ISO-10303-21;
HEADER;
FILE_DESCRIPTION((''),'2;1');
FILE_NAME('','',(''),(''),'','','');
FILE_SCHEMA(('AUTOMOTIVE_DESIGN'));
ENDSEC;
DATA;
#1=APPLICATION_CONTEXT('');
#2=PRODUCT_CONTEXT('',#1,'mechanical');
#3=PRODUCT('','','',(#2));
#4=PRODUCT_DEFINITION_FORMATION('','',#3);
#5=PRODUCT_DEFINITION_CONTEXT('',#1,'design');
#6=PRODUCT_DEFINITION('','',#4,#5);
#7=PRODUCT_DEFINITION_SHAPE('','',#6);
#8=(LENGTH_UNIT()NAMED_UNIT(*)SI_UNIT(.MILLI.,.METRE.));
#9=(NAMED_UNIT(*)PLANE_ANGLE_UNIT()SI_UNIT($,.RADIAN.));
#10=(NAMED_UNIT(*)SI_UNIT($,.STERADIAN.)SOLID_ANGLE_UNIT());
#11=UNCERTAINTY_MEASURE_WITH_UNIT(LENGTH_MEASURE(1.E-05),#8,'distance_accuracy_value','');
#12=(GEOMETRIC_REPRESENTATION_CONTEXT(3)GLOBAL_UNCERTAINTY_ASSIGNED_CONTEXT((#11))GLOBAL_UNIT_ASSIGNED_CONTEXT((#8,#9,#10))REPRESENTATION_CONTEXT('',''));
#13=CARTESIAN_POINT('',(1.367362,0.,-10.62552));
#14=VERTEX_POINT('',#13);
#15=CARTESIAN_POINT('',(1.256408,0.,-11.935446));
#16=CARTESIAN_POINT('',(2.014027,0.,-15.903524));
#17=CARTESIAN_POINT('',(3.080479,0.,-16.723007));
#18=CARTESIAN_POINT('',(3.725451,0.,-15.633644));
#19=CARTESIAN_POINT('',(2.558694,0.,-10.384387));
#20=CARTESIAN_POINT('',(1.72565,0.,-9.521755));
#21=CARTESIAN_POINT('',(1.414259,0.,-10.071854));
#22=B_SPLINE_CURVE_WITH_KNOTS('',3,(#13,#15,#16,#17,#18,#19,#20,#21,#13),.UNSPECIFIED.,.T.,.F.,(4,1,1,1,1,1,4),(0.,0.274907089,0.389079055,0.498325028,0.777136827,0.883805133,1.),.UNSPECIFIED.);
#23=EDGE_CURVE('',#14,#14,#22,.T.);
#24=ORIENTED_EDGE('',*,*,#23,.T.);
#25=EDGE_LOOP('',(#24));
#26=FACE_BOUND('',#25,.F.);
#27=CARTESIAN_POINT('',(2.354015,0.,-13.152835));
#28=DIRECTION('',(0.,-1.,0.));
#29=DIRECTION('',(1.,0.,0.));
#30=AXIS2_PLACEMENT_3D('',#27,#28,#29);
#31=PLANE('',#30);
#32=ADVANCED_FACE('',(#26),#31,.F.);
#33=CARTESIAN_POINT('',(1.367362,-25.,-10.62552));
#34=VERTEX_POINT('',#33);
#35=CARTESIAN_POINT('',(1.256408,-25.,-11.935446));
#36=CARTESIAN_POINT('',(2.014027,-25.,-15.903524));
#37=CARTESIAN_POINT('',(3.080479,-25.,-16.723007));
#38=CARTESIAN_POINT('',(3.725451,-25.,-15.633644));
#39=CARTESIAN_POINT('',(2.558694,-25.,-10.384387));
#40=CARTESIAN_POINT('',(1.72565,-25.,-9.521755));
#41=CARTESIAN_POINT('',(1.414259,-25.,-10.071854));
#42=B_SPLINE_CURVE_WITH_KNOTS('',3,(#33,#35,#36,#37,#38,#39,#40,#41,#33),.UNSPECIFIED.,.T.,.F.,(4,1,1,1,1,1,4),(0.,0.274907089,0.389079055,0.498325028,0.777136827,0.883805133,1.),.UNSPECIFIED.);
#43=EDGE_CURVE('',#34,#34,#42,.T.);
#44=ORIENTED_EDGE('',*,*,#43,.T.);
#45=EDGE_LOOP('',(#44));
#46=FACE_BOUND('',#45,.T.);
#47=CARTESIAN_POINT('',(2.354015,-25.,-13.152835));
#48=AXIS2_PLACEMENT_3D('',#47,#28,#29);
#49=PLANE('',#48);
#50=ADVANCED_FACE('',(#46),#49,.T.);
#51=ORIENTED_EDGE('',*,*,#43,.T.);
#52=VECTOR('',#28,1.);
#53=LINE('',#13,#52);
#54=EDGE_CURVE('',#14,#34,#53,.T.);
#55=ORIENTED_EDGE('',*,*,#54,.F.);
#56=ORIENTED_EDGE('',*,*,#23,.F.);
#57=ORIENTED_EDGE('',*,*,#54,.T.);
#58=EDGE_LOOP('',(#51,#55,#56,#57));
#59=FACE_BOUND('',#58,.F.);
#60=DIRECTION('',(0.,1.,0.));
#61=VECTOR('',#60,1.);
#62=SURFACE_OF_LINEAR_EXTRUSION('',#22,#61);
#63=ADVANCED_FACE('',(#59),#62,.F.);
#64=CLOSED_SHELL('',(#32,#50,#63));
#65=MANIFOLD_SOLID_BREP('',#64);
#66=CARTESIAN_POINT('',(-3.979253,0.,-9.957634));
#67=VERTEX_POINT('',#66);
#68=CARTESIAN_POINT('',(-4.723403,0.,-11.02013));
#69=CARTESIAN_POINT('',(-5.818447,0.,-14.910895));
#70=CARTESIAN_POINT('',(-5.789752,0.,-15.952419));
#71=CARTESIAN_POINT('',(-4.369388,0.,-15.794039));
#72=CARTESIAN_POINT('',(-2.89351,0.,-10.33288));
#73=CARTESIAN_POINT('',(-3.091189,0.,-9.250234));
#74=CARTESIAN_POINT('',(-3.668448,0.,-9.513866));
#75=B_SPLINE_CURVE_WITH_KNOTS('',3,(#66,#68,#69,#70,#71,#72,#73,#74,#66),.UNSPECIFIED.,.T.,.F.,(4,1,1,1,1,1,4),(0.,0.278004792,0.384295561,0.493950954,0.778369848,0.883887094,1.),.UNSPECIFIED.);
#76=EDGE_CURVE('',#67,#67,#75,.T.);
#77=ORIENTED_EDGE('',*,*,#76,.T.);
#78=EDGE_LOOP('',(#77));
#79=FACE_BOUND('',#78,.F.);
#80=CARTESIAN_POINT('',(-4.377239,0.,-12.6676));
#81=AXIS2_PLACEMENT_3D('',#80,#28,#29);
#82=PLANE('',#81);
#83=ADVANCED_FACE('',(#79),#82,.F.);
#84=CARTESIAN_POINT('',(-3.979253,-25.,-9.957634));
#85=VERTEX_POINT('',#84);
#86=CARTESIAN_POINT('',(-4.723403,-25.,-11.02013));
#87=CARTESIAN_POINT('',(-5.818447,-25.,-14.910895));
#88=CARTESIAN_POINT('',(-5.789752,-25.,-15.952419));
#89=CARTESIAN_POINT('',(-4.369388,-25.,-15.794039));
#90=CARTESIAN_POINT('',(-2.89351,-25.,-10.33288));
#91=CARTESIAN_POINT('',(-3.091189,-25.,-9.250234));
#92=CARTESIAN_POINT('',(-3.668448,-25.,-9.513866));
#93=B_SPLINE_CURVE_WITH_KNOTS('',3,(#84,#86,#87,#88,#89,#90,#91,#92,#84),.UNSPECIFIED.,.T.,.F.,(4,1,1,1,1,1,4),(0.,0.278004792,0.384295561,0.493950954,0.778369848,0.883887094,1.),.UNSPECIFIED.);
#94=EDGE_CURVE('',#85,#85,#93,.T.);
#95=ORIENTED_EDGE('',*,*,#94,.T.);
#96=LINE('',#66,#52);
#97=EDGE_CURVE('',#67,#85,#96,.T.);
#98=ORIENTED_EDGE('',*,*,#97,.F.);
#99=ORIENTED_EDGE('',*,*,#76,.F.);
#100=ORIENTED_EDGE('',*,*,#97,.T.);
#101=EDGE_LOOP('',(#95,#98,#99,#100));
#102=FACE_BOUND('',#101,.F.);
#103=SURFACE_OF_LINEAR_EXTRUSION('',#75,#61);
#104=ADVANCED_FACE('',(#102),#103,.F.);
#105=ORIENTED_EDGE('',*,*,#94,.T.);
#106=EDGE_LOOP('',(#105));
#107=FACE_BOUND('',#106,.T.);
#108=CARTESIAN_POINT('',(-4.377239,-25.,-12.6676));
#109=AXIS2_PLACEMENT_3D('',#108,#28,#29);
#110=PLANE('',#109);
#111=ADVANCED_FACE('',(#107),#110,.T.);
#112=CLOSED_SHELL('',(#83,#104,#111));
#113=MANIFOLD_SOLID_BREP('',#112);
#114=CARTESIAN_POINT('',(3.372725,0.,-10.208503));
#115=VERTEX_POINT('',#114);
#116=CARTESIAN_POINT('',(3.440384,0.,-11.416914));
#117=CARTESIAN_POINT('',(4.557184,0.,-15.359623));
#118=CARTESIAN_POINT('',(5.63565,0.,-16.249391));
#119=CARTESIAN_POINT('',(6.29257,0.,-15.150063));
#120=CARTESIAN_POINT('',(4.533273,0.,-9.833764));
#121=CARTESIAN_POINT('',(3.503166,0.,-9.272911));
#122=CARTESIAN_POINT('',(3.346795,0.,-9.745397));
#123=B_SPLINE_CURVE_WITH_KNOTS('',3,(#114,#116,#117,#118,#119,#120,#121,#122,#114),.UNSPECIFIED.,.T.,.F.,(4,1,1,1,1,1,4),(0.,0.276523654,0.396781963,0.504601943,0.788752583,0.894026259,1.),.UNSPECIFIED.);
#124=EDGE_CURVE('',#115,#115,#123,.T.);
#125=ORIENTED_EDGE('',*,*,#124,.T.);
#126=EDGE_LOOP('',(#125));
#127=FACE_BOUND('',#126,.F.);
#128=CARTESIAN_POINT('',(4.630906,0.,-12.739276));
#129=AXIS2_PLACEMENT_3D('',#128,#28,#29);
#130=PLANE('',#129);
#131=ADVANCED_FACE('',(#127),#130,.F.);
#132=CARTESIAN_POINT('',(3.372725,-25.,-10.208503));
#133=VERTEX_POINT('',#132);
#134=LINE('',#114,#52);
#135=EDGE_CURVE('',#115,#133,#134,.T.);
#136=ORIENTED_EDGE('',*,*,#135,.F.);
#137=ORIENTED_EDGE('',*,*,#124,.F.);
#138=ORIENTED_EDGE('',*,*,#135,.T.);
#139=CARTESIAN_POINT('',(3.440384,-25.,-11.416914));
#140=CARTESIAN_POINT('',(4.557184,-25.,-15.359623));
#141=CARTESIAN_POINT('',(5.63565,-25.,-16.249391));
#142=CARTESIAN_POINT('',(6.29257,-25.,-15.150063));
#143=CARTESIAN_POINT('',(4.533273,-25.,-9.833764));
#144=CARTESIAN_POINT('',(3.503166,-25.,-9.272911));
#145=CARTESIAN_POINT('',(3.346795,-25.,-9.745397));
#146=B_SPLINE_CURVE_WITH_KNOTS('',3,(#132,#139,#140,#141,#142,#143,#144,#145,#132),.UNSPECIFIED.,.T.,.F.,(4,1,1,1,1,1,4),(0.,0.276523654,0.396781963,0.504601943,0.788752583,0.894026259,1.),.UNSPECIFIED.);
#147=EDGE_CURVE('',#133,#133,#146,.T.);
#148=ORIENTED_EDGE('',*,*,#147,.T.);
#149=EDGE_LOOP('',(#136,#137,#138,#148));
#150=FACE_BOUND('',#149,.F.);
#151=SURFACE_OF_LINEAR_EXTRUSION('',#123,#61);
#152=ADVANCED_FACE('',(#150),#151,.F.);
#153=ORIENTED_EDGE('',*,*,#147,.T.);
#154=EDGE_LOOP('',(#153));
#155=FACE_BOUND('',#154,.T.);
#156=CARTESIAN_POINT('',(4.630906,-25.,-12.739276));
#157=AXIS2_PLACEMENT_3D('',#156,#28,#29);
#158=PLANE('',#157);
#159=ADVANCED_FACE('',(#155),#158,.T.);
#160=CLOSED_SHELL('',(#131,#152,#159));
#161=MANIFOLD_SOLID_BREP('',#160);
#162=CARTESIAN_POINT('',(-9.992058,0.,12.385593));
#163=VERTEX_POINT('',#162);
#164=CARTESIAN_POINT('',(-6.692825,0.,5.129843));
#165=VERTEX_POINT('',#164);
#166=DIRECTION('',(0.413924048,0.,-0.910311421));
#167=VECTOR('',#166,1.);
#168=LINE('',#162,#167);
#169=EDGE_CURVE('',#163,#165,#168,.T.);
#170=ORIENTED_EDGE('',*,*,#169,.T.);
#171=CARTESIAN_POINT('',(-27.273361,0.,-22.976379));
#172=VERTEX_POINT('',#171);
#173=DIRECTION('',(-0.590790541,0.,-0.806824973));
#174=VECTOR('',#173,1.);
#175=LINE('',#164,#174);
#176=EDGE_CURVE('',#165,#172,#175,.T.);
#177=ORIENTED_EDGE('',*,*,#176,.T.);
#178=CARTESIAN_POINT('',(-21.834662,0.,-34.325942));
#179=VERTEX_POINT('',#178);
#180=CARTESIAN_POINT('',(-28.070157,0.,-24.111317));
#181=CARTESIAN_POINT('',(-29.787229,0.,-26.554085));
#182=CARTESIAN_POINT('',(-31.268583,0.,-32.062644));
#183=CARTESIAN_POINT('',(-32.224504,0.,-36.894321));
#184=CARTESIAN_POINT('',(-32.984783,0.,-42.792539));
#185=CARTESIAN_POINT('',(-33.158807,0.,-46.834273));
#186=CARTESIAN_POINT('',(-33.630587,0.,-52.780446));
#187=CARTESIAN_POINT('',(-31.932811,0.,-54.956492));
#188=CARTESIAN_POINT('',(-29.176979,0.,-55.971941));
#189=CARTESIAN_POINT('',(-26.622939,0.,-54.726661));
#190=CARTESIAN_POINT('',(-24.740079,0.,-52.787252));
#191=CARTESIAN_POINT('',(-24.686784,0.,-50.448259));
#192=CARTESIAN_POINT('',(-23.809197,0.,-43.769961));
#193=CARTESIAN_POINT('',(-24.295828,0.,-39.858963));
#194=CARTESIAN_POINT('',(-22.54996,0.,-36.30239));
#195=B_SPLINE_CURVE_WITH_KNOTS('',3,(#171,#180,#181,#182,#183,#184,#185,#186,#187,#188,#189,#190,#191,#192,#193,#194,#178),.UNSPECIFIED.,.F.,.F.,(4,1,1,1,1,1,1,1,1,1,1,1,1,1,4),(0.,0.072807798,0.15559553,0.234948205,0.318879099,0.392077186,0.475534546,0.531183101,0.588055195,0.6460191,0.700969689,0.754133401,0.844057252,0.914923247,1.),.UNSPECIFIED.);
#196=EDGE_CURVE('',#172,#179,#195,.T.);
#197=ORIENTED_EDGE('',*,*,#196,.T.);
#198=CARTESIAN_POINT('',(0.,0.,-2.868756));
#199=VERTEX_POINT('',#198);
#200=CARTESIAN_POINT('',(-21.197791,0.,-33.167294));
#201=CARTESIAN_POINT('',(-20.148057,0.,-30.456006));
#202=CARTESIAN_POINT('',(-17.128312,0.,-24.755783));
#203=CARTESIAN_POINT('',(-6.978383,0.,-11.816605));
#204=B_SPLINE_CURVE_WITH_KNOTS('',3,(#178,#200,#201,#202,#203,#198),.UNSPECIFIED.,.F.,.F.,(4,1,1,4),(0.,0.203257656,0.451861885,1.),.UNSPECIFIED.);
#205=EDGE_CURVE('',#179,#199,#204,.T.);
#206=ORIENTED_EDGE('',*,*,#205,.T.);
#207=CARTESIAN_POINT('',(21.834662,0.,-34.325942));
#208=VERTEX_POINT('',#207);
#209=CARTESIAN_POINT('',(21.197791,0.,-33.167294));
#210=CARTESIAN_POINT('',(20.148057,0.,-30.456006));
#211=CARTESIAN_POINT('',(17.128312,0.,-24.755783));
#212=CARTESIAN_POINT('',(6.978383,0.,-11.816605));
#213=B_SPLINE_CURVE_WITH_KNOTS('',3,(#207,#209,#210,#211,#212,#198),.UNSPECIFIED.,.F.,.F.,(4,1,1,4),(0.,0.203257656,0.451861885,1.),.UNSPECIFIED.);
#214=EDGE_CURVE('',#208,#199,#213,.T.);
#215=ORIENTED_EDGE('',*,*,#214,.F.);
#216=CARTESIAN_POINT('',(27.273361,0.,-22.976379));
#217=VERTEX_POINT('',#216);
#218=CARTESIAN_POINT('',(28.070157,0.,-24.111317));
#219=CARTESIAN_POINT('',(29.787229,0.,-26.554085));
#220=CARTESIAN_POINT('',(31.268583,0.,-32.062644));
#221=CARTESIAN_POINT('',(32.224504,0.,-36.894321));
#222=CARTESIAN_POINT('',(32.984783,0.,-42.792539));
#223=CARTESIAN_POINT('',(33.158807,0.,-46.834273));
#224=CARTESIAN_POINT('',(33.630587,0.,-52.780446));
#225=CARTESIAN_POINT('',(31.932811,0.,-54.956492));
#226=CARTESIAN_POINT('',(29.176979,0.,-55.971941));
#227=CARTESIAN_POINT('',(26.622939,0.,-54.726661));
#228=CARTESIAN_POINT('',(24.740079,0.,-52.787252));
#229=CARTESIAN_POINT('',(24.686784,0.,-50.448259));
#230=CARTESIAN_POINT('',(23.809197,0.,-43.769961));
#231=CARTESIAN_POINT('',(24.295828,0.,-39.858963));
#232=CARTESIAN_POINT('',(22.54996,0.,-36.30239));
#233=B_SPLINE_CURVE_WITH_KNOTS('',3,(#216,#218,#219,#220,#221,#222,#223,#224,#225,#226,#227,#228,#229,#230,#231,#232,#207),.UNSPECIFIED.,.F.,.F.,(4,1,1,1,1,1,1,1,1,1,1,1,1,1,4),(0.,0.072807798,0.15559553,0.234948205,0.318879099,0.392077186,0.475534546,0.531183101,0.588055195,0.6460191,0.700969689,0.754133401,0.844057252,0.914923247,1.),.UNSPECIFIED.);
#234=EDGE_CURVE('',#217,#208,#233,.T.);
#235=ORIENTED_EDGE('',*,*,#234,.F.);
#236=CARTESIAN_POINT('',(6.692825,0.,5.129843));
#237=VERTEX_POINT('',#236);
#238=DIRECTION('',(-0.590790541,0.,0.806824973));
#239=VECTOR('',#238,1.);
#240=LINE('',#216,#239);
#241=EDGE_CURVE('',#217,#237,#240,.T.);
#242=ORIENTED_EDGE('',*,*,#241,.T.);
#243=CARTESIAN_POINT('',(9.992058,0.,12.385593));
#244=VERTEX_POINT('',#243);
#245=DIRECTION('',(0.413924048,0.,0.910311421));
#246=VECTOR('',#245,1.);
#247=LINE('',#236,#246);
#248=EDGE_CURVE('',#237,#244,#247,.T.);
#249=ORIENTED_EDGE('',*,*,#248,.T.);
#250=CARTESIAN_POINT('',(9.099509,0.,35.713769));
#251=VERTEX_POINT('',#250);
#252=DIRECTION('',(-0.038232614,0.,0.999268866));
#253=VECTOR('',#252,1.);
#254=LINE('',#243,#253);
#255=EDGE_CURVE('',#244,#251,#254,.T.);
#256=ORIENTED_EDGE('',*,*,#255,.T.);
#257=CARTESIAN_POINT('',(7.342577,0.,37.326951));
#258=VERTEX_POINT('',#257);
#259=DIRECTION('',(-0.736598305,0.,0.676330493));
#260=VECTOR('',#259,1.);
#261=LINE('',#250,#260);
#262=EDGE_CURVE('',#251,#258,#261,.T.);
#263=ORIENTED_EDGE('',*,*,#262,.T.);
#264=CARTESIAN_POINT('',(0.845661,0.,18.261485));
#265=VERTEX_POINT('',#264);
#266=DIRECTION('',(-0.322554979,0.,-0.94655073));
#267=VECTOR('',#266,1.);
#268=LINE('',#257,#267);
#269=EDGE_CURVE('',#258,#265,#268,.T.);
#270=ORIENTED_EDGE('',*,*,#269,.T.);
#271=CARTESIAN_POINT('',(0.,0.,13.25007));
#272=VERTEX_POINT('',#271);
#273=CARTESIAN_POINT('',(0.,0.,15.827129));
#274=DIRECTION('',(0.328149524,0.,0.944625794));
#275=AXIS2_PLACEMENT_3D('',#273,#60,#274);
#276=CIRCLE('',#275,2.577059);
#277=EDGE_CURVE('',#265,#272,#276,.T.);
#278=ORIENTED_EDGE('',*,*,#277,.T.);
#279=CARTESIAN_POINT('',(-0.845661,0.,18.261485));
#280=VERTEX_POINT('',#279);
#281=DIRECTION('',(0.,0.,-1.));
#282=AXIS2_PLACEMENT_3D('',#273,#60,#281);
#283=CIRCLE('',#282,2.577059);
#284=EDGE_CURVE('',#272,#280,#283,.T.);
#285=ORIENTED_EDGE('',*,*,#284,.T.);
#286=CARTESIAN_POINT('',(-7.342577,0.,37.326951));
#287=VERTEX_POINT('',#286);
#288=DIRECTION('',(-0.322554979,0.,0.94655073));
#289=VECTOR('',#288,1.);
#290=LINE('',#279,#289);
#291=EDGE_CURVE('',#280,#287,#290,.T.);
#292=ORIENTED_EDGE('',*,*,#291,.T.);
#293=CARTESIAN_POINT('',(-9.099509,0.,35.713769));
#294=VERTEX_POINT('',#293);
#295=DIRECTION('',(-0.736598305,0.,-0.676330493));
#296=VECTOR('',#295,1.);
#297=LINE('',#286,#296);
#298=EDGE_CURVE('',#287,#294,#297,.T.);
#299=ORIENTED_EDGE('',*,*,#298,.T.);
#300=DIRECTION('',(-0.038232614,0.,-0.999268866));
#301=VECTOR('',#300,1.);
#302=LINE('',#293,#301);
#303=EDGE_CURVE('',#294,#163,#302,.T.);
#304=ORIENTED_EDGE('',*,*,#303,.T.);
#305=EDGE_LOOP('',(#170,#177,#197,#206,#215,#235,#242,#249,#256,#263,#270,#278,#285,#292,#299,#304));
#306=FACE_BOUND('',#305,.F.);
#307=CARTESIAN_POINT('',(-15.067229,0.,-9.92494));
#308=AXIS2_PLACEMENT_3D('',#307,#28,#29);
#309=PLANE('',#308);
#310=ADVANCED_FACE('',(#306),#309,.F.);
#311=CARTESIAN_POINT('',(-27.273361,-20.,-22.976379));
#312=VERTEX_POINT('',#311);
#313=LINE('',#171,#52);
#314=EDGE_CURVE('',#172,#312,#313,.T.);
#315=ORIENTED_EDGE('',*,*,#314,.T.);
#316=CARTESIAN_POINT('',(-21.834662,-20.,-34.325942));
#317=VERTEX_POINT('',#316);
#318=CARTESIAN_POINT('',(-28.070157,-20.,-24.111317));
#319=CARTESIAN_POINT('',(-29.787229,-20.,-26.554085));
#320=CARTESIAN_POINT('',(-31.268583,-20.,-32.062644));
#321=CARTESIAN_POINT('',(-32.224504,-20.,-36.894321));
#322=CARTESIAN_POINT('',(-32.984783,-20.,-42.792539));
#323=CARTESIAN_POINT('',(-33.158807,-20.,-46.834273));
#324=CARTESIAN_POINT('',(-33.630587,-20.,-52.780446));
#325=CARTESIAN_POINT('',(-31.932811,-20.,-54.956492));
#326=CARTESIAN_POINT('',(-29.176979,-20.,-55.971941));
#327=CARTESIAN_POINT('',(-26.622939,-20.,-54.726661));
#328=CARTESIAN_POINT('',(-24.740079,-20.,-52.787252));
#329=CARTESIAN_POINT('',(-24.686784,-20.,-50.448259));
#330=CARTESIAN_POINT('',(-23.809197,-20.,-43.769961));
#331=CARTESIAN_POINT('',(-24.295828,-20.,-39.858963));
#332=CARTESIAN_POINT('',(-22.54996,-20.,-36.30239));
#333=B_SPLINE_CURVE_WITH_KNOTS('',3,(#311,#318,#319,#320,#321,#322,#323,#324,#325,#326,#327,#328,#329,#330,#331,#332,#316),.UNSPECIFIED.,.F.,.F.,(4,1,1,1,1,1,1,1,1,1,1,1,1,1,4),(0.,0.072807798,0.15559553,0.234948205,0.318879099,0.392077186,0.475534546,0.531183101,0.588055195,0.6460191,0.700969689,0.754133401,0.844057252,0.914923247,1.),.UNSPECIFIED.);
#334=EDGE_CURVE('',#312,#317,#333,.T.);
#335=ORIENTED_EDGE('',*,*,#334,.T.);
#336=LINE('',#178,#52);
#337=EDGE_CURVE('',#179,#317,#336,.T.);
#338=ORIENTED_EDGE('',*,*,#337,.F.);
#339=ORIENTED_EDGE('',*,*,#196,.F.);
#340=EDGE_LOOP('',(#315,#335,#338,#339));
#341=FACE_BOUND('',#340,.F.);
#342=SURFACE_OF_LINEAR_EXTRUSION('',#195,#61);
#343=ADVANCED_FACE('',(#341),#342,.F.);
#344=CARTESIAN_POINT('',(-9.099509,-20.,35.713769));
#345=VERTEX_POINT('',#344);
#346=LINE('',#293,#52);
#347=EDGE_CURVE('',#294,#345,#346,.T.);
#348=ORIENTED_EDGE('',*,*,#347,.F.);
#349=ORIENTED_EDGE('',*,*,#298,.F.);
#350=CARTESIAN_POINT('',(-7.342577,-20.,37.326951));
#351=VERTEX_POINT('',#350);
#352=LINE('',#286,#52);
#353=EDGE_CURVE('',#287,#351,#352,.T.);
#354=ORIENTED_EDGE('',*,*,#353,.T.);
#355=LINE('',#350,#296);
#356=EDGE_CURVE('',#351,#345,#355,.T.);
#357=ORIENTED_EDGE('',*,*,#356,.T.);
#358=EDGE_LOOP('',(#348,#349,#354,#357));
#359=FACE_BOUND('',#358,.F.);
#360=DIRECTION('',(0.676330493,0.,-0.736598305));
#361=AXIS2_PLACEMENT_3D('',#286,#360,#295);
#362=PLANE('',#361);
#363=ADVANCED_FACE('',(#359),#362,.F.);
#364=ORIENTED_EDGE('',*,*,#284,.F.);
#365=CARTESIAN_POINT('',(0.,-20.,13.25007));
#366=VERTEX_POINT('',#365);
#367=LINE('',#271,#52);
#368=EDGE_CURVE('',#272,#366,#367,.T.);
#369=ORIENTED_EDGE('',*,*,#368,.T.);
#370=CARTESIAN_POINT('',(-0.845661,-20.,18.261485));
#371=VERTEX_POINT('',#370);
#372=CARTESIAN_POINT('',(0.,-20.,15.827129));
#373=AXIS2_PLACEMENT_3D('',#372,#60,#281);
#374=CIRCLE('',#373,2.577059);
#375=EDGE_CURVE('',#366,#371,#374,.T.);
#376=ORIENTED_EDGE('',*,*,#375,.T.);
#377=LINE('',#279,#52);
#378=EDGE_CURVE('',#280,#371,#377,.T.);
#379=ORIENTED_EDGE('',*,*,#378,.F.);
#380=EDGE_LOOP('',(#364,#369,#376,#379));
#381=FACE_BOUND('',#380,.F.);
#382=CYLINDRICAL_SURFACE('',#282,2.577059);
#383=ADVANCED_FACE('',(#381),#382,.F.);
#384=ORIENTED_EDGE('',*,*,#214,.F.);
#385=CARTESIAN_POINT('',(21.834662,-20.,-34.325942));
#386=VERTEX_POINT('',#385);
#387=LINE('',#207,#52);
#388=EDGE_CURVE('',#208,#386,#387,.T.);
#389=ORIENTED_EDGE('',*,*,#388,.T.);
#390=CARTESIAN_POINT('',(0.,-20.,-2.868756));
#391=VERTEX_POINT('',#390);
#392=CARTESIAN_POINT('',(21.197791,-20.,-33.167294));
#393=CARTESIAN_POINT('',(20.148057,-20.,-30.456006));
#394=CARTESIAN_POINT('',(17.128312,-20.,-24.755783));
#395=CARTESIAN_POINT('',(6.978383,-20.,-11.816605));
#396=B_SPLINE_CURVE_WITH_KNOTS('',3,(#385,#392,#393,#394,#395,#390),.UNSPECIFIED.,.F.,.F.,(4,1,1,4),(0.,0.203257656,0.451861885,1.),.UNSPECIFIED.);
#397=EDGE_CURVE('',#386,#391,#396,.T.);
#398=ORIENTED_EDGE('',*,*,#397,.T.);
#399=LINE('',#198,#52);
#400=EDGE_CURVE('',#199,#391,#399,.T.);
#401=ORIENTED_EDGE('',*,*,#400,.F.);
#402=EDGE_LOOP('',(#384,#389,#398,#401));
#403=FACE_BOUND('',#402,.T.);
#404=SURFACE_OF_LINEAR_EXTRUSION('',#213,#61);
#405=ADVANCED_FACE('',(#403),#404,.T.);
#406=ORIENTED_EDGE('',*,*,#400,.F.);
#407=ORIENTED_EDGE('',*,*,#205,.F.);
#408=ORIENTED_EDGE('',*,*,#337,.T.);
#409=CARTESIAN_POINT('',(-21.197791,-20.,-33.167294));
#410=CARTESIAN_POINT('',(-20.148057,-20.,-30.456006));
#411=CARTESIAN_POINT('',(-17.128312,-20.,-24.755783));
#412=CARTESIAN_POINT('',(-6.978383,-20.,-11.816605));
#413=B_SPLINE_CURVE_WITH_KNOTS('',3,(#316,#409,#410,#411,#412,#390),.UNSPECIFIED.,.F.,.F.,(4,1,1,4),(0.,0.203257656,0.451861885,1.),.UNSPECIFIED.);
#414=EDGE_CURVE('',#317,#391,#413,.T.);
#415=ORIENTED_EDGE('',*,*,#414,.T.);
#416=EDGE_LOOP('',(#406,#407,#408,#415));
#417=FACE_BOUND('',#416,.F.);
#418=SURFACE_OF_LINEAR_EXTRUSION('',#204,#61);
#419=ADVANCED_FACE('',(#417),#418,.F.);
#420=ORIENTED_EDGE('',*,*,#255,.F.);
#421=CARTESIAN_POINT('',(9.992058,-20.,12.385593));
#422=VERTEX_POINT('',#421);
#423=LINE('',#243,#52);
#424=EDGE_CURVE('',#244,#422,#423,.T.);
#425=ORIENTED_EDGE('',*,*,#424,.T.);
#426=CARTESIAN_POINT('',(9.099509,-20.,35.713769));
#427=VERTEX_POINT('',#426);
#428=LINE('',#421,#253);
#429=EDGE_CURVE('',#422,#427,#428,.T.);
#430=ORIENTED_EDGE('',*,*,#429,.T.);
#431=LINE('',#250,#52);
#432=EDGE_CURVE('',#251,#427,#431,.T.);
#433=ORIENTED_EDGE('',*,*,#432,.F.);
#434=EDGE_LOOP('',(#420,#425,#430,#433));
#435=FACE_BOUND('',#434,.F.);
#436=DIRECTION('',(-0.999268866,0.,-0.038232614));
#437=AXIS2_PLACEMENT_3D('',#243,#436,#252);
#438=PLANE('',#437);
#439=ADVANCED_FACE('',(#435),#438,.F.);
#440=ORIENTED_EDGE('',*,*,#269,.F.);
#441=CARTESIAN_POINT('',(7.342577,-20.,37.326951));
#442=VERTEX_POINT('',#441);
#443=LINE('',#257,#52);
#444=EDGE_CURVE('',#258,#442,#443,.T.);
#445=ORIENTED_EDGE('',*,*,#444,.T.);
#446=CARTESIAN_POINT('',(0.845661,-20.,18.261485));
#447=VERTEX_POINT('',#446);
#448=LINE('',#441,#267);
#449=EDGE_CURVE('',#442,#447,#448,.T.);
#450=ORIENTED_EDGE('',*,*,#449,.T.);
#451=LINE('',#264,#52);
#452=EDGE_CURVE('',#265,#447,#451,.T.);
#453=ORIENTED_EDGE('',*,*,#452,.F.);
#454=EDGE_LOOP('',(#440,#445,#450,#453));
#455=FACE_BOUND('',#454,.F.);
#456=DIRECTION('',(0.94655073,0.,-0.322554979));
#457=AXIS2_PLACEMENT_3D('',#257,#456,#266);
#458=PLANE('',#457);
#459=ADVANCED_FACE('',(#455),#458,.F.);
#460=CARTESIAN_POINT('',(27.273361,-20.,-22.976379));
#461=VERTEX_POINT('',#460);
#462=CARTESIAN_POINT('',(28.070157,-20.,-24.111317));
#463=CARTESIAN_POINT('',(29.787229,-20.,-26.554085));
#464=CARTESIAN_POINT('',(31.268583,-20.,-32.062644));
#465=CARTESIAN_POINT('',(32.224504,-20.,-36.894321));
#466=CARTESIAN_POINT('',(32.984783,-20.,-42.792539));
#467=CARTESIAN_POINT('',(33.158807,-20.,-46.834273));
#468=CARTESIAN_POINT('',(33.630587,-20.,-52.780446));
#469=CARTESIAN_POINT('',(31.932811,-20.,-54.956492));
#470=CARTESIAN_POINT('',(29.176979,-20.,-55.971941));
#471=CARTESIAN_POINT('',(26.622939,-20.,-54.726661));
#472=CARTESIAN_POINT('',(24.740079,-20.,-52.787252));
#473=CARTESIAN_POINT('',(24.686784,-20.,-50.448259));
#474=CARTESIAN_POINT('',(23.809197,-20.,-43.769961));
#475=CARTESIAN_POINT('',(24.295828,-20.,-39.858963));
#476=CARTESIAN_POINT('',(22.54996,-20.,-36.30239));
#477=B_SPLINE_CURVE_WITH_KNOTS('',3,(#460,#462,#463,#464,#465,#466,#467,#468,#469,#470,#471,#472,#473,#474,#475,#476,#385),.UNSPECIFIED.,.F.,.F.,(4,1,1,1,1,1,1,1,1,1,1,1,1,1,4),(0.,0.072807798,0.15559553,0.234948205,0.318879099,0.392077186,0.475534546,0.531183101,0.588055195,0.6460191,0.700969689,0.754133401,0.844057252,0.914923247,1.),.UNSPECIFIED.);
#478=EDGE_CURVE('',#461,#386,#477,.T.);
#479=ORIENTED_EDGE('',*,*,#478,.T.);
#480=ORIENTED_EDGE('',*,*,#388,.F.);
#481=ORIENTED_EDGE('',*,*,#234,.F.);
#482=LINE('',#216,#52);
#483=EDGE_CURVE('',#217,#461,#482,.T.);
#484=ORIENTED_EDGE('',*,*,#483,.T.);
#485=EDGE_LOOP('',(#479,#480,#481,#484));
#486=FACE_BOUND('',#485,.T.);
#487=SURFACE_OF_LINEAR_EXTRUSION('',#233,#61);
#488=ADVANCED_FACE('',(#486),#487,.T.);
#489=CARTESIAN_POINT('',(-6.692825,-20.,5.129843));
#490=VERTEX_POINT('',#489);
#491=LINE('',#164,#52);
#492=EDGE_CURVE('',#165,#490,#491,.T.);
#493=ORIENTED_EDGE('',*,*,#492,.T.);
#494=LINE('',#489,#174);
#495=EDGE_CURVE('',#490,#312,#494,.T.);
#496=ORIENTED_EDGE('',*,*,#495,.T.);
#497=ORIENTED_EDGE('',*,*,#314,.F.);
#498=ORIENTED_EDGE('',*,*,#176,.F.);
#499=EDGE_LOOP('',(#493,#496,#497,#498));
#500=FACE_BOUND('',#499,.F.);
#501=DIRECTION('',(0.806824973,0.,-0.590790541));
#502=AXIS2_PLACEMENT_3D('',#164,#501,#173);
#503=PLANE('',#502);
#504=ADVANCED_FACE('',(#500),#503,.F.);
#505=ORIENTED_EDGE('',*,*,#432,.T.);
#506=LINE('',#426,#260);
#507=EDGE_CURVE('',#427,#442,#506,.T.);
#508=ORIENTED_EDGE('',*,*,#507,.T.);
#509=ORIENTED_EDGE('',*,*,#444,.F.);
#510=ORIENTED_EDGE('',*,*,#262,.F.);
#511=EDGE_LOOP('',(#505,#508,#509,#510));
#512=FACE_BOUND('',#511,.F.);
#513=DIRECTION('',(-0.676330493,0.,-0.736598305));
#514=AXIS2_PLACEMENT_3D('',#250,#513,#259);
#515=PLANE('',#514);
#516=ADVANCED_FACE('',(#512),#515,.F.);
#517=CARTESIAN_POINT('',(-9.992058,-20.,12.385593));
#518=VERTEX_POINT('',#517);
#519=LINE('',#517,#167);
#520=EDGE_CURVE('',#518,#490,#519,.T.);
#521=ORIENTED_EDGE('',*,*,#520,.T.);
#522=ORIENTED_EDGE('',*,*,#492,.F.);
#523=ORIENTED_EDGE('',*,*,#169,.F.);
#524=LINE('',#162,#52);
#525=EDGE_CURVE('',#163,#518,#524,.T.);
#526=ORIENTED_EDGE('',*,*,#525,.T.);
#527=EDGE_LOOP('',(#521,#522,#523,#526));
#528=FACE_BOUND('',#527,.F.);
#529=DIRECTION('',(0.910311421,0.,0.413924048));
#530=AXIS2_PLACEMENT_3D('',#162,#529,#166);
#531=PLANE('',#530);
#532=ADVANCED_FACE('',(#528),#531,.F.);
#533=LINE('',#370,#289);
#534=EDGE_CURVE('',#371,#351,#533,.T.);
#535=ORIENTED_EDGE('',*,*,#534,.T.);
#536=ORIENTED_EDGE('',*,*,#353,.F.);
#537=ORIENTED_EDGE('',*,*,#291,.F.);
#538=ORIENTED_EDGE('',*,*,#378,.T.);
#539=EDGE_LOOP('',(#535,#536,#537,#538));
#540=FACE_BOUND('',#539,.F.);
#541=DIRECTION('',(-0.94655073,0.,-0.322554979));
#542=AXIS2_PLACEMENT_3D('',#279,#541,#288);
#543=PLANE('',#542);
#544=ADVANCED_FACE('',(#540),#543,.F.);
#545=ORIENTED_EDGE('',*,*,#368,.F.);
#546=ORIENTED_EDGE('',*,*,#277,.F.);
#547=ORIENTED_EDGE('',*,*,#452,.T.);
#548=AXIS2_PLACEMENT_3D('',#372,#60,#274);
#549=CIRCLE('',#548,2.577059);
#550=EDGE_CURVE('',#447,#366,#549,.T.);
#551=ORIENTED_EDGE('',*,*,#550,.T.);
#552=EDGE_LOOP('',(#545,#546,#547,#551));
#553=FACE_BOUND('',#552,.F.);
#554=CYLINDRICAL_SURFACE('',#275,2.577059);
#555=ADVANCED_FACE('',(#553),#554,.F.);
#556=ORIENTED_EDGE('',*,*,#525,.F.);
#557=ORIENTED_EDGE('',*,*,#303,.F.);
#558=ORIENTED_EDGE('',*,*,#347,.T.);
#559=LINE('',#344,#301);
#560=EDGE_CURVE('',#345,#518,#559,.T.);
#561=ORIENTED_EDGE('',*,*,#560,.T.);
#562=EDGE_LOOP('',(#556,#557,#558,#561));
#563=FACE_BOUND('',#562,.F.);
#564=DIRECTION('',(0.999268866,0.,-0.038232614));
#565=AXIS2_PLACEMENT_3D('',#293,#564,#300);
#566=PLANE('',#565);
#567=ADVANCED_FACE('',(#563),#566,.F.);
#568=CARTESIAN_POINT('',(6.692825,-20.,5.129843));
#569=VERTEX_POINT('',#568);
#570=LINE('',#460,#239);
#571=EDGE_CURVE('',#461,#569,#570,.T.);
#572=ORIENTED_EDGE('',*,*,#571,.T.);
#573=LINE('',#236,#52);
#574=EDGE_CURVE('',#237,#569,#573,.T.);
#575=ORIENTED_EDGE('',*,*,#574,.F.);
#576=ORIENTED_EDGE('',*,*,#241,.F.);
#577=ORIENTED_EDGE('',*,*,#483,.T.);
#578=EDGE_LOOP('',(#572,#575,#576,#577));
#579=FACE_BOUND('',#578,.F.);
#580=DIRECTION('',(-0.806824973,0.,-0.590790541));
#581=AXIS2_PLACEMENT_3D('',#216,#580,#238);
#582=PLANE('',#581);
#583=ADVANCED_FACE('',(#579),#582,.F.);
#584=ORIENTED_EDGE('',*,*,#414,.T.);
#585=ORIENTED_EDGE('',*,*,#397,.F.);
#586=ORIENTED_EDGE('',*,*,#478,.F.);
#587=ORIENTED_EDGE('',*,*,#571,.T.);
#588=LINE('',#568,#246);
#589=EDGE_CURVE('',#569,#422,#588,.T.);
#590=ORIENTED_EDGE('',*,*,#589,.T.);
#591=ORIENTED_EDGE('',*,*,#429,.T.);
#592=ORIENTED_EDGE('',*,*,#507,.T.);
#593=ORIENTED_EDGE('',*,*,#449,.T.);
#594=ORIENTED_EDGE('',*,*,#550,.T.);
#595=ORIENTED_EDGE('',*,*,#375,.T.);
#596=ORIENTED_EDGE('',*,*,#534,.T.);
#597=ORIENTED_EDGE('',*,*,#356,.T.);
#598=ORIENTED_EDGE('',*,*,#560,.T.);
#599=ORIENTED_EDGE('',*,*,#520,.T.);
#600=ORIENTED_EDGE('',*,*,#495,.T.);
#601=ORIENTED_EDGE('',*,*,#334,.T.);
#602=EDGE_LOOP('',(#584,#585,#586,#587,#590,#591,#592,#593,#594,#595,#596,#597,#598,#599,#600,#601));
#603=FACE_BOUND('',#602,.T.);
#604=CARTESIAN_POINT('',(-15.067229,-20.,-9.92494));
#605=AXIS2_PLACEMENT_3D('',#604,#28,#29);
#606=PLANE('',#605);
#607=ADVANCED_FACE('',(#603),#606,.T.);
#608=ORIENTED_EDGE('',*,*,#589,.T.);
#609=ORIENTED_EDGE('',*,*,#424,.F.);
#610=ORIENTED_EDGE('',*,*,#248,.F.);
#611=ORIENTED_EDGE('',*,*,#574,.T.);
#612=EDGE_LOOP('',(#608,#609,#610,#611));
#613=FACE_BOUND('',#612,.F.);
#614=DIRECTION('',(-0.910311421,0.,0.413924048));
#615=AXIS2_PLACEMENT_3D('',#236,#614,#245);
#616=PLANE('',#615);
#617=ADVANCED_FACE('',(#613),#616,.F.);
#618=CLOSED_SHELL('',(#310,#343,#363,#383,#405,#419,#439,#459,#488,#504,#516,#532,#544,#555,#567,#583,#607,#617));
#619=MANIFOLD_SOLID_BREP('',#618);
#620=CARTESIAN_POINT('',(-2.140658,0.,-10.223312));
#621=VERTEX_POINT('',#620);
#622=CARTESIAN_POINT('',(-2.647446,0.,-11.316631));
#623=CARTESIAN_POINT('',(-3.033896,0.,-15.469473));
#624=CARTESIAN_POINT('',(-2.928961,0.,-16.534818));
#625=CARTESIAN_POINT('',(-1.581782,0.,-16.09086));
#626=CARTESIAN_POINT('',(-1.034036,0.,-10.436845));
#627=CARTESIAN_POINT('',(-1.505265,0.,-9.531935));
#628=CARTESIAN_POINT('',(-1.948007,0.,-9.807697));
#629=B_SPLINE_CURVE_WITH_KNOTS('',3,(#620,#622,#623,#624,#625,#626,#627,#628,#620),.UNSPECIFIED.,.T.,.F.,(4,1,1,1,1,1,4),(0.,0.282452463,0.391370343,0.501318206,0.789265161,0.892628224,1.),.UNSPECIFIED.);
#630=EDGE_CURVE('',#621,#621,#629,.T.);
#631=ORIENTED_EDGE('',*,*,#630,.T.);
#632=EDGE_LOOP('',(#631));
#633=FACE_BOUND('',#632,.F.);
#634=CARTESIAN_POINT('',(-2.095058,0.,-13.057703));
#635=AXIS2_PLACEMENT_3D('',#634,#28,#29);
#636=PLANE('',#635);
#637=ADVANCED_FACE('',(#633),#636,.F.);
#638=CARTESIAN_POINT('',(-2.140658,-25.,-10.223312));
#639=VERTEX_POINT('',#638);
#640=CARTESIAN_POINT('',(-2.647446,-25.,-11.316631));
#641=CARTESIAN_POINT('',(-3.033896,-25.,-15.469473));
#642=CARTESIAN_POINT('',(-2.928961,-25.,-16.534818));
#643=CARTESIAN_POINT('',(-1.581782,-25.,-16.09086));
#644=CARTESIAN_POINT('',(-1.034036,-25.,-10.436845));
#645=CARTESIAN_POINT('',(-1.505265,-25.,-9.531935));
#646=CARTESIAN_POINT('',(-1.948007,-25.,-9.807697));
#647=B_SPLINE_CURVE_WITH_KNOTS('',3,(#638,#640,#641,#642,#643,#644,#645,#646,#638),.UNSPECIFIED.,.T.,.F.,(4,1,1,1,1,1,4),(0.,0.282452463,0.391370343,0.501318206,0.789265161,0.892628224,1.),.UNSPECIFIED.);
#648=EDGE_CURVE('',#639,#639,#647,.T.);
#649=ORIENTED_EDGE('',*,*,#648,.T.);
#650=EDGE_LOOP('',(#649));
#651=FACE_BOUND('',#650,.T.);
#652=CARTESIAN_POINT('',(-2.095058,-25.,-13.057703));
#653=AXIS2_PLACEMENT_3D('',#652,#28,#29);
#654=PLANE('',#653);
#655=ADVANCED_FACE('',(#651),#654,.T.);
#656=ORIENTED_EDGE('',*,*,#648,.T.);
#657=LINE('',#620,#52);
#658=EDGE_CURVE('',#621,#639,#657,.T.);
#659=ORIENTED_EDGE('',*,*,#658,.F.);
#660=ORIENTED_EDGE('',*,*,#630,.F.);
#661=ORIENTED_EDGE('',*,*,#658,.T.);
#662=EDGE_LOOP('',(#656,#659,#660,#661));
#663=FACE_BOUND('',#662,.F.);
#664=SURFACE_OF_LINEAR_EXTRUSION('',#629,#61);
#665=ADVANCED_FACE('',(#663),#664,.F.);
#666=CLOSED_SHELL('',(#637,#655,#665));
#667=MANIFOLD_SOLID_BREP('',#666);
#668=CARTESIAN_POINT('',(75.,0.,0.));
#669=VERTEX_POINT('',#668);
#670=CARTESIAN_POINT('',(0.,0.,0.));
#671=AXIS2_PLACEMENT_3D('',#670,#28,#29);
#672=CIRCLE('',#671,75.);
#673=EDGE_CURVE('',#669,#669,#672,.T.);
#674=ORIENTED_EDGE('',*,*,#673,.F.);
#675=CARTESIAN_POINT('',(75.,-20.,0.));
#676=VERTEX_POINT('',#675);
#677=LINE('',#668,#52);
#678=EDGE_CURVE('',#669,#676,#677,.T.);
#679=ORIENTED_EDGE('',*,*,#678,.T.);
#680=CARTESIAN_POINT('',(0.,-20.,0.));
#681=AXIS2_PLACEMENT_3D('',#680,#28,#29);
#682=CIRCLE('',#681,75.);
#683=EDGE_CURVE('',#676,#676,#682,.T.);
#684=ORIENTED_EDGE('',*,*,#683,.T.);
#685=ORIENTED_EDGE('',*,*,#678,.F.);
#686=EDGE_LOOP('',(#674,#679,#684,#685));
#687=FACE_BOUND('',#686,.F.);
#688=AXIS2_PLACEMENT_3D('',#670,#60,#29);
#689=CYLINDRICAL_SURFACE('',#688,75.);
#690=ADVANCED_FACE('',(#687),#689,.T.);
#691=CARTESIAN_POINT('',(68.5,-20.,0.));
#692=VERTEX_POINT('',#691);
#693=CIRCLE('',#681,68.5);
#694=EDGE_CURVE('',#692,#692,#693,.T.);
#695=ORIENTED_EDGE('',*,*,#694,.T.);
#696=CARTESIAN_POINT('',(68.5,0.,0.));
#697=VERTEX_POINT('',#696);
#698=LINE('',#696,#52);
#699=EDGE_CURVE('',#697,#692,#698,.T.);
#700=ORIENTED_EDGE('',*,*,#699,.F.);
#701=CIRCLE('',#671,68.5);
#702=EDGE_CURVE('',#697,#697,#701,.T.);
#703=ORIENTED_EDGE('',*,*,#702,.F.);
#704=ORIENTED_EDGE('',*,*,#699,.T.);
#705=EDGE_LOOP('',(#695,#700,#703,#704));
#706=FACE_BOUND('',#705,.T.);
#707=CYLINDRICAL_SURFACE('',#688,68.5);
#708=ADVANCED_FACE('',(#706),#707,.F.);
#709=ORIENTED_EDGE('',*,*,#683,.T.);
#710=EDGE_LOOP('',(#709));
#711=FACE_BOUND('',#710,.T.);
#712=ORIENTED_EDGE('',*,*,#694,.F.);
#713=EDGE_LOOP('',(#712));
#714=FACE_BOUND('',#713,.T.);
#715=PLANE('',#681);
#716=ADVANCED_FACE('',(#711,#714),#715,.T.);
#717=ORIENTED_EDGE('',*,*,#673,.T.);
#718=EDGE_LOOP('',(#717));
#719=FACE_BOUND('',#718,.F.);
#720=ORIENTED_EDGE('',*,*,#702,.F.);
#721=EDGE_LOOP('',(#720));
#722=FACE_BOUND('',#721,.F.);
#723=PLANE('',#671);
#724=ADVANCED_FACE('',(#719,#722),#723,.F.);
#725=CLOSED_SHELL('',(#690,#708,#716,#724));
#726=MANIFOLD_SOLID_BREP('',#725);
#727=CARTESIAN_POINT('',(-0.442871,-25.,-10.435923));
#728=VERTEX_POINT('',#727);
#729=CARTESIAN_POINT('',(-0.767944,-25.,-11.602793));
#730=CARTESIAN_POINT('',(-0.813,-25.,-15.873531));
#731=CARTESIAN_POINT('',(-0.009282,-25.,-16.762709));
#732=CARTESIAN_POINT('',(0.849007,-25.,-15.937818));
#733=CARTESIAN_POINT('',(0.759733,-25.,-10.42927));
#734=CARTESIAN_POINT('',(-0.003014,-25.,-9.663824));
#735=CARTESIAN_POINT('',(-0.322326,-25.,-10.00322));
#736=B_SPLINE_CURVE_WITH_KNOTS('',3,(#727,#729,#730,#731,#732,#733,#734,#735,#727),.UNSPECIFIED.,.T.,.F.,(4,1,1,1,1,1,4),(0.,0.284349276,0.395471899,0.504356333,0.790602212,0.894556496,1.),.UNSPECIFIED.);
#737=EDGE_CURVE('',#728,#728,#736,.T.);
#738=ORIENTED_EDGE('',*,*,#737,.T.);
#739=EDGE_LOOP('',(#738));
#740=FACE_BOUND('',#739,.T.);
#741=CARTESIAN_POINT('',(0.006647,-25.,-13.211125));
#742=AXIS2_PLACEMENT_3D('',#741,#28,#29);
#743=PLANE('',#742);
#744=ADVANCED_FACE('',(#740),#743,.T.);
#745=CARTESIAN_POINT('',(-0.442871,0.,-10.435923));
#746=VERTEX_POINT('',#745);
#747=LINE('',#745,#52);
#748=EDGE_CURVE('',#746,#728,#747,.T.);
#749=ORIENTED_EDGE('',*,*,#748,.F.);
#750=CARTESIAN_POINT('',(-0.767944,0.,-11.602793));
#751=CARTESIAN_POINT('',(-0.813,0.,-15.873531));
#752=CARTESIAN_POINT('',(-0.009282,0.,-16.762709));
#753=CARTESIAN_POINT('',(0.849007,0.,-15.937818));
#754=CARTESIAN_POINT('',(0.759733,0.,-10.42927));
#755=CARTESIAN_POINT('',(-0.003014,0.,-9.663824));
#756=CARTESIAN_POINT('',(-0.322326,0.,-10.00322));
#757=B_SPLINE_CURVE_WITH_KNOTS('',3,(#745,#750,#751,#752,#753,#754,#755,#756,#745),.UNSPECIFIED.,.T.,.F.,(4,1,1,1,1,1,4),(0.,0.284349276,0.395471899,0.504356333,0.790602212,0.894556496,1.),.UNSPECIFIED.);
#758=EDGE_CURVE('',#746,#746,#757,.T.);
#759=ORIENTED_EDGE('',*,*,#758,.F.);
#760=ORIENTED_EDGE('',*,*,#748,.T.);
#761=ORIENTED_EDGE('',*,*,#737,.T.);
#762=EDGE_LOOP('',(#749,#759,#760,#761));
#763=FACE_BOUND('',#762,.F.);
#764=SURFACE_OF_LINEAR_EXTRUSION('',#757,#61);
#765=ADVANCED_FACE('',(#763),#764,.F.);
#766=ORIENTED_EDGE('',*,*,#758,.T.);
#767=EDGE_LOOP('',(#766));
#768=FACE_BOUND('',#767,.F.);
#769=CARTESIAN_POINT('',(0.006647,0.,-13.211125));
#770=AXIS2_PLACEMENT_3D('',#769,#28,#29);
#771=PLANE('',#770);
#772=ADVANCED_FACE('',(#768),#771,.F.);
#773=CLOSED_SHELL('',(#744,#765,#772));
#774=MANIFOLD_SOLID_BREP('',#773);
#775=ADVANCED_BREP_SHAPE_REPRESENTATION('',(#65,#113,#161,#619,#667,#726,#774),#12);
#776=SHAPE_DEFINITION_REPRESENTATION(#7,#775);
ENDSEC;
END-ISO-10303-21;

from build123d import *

# Parameters (mm, degrees)
F0_R     = 75
F0_R_2   = 68.5
F3_DEPTH = 20
F4_DEPTH = 20
F5_DEPTH = 25


# Not quite as in the source:
# - the program builds the solid bodies; features that only make, move or delete a surface that nothing else refers to are left out


with BuildPart() as f3:
    # F0 (on Front) → F3 (new body)
    with BuildSketch(Plane.XZ):
        Circle(F0_R)
        Circle(F0_R_2, mode=Mode.SUBTRACT)
    extrude(amount=F3_DEPTH)


with BuildPart() as f4:
    # F1 (on Front) → F4 (new body)
    with BuildSketch(Plane.XZ):
        with BuildLine():
            Line((-9.0995086357, 35.7137694955), (-9.9920583889, 12.3855927959))
            Line((-9.9920583889, 12.3855927959), (-6.6928253509, 5.1298425533))
            Line((-6.6928253509, 5.1298425533), (-27.2733609587, -22.9763794423))
            add(Edge.make_bspline(
                [(-27.2733609587, -22.9763794423), (-28.0701572192, -24.1113172157), (-29.7872293545, -26.5540850688), (-31.2685830075, -32.0626437011), (-32.2245036764, -36.8943208623), (-32.9847834531, -42.7925387191), (-33.158807326, -46.8342729752), (-33.6305868752, -52.7804458081), (-31.9328109038, -54.9564916282), (-29.1769791488, -55.9719408417), (-26.6229388074, -54.7266613513), (-24.7400791093, -52.7872522334), (-24.6867835743, -50.4482589336), (-23.8091970418, -43.7699607903), (-24.295828176, -39.8589629216), (-22.549959608, -36.3023901443), (-21.8346624254, -34.3259416133)],
                knots=[0, 0, 0, 0, 0.072807798, 0.1555955303, 0.2349482052, 0.3188790992, 0.3920771862, 0.4755345455, 0.5311831014, 0.5880551952, 0.6460190998, 0.7009696888, 0.7541334009, 0.8440572518, 0.9149232468, 1, 1, 1, 1], degree=3))
            add(Edge.make_bspline(
                [(-21.8346624254, -34.3259416133), (-21.1977907958, -33.16729403), (-20.1480574173, -30.456005728), (-17.1283124622, -24.7557830955), (-6.9783833146, -11.8166051914), (0, -2.868756419)],
                knots=[0, 0, 0, 0, 0.2032576565, 0.4518618851, 1, 1, 1, 1], degree=3))
            Line((0, -2.868756419), (0, 13.2500697194))
            ThreePointArc((0, 13.2500697194), (-2.5411327705, 15.3983203428), (-0.8456606301, 18.2614848018))
            Line((-0.8456606301, 18.2614848018), (-7.3425769806, 37.3269505799))
            Line((-7.3425769806, 37.3269505799), (-9.0995086357, 35.7137694955))
        make_face()
        with BuildLine():
            ThreePointArc((0.8456606301, 18.2614848018), (2.5411327705, 15.3983203428), (0, 13.2500697194))
            Line((0, 13.2500697194), (0, -2.868756419))
            add(Edge.make_bspline(
                [(21.8346624254, -34.3259416133), (21.1977907958, -33.16729403), (20.1480574173, -30.456005728), (17.1283124622, -24.7557830955), (6.9783833146, -11.8166051914), (0, -2.868756419)],
                knots=[0, 0, 0, 0, 0.2032576565, 0.4518618851, 1, 1, 1, 1], degree=3))
            add(Edge.make_bspline(
                [(27.2733609587, -22.9763794423), (28.0701572192, -24.1113172157), (29.7872293545, -26.5540850688), (31.2685830075, -32.0626437011), (32.2245036764, -36.8943208623), (32.9847834531, -42.7925387191), (33.158807326, -46.8342729752), (33.6305868752, -52.7804458081), (31.9328109038, -54.9564916282), (29.1769791488, -55.9719408417), (26.6229388074, -54.7266613513), (24.7400791093, -52.7872522334), (24.6867835743, -50.4482589336), (23.8091970418, -43.7699607903), (24.295828176, -39.8589629216), (22.549959608, -36.3023901443), (21.8346624254, -34.3259416133)],
                knots=[0, 0, 0, 0, 0.072807798, 0.1555955303, 0.2349482052, 0.3188790992, 0.3920771862, 0.4755345455, 0.5311831014, 0.5880551952, 0.6460190998, 0.7009696888, 0.7541334009, 0.8440572518, 0.9149232468, 1, 1, 1, 1], degree=3))
            Line((27.2733609587, -22.9763794423), (6.6928253509, 5.1298425533))
            Line((6.6928253509, 5.1298425533), (9.9920583889, 12.3855927959))
            Line((9.9920583889, 12.3855927959), (9.0995086357, 35.7137694955))
            Line((9.0995086357, 35.7137694955), (7.3425769806, 37.3269505799))
            Line((7.3425769806, 37.3269505799), (0.8456606301, 18.2614848018))
        make_face()
    extrude(amount=F4_DEPTH)


with BuildPart() as f5:
    # F2 (on Front) → F5 (new body)
    with BuildSketch(Plane.XZ):
        with BuildLine():
            add(Edge.make_bspline(
                [(-3.979253338, -9.9576336976), (-4.7234029968, -11.020130225), (-5.8184468002, -14.9108947774), (-5.7897516039, -15.9524187409), (-4.3693884753, -15.7940391734), (-2.8935100281, -10.3328801035), (-3.0911885315, -9.2502342639), (-3.6684479768, -9.5138659513), (-3.979253338, -9.9576336976)],
                knots=[0, 0, 0, 0, 0.2780047915, 0.3842955615, 0.4939509538, 0.7783698483, 0.8838870936, 1, 1, 1, 1], degree=3))
        make_face()
    extrude(amount=F5_DEPTH)


with BuildPart() as f5b:
    # F2 (on Front) → F5, piece 2 (new body)
    with BuildSketch(Plane.XZ):
        with BuildLine():
            add(Edge.make_bspline(
                [(-2.1406578188, -10.2233118998), (-2.6474458062, -11.3166308025), (-3.0338956059, -15.4694728402), (-2.9289606035, -16.5348183601), (-1.5817817155, -16.0908600995), (-1.0340360871, -10.4368448604), (-1.5052646067, -9.5319348747), (-1.9480069005, -9.8076965028), (-2.1406578188, -10.2233118998)],
                knots=[0, 0, 0, 0, 0.2824524627, 0.3913703426, 0.5013182062, 0.7892651608, 0.8926282239, 1, 1, 1, 1], degree=3))
        make_face()
    extrude(amount=F5_DEPTH)


with BuildPart() as f5c:
    # F2 (on Front) → F5, piece 3 (new body)
    with BuildSketch(Plane.XZ):
        with BuildLine():
            add(Edge.make_bspline(
                [(-0.4428708344, -10.4359230027), (-0.7679443068, -11.6027928695), (-0.8129996926, -15.8735305643), (-0.0092816936, -16.7627087867), (0.8490072939, -15.937818454), (0.759733332, -10.4292701958), (-0.0030141921, -9.6638237199), (-0.3223258254, -10.0032197818), (-0.4428708344, -10.4359230027)],
                knots=[0, 0, 0, 0, 0.2843492762, 0.3954718988, 0.5043563334, 0.7906022123, 0.8945564958, 1, 1, 1, 1], degree=3))
        make_face()
    extrude(amount=F5_DEPTH)


with BuildPart() as f5d:
    # F2 (on Front) → F5, piece 4 (new body)
    with BuildSketch(Plane.XZ):
        with BuildLine():
            add(Edge.make_bspline(
                [(1.3673621106, -10.6255200318), (1.2564075628, -11.9354456348), (2.0140270441, -15.9035244545), (3.0804786381, -16.7230068951), (3.7254514579, -15.6336444386), (2.558694432, -10.3843869657), (1.7256497602, -9.521754608), (1.4142592239, -10.0718543126), (1.3673621106, -10.6255200318)],
                knots=[0, 0, 0, 0, 0.2749070885, 0.3890790555, 0.4983250276, 0.7771368273, 0.8838051332, 1, 1, 1, 1], degree=3))
        make_face()
    extrude(amount=F5_DEPTH)


with BuildPart() as f5e:
    # F2 (on Front) → F5, piece 5 (new body)
    with BuildSketch(Plane.XZ):
        with BuildLine():
            add(Edge.make_bspline(
                [(3.3727246337, -10.2085033432), (3.4403839991, -11.4169141621), (4.5571836092, -15.3596231402), (5.6356497321, -16.2493912459), (6.2925703598, -15.1500632705), (4.5332733528, -9.8337640221), (3.5031655273, -9.2729109296), (3.3467951481, -9.7453971539), (3.3727246337, -10.2085033432)],
                knots=[0, 0, 0, 0, 0.2765236536, 0.3967819627, 0.5046019431, 0.7887525835, 0.8940262587, 1, 1, 1, 1], degree=3))
        make_face()
    extrude(amount=F5_DEPTH)


solid = Compound([f3.part, f4.part, f5.part, f5b.part, f5c.part, f5d.part, f5e.part])
